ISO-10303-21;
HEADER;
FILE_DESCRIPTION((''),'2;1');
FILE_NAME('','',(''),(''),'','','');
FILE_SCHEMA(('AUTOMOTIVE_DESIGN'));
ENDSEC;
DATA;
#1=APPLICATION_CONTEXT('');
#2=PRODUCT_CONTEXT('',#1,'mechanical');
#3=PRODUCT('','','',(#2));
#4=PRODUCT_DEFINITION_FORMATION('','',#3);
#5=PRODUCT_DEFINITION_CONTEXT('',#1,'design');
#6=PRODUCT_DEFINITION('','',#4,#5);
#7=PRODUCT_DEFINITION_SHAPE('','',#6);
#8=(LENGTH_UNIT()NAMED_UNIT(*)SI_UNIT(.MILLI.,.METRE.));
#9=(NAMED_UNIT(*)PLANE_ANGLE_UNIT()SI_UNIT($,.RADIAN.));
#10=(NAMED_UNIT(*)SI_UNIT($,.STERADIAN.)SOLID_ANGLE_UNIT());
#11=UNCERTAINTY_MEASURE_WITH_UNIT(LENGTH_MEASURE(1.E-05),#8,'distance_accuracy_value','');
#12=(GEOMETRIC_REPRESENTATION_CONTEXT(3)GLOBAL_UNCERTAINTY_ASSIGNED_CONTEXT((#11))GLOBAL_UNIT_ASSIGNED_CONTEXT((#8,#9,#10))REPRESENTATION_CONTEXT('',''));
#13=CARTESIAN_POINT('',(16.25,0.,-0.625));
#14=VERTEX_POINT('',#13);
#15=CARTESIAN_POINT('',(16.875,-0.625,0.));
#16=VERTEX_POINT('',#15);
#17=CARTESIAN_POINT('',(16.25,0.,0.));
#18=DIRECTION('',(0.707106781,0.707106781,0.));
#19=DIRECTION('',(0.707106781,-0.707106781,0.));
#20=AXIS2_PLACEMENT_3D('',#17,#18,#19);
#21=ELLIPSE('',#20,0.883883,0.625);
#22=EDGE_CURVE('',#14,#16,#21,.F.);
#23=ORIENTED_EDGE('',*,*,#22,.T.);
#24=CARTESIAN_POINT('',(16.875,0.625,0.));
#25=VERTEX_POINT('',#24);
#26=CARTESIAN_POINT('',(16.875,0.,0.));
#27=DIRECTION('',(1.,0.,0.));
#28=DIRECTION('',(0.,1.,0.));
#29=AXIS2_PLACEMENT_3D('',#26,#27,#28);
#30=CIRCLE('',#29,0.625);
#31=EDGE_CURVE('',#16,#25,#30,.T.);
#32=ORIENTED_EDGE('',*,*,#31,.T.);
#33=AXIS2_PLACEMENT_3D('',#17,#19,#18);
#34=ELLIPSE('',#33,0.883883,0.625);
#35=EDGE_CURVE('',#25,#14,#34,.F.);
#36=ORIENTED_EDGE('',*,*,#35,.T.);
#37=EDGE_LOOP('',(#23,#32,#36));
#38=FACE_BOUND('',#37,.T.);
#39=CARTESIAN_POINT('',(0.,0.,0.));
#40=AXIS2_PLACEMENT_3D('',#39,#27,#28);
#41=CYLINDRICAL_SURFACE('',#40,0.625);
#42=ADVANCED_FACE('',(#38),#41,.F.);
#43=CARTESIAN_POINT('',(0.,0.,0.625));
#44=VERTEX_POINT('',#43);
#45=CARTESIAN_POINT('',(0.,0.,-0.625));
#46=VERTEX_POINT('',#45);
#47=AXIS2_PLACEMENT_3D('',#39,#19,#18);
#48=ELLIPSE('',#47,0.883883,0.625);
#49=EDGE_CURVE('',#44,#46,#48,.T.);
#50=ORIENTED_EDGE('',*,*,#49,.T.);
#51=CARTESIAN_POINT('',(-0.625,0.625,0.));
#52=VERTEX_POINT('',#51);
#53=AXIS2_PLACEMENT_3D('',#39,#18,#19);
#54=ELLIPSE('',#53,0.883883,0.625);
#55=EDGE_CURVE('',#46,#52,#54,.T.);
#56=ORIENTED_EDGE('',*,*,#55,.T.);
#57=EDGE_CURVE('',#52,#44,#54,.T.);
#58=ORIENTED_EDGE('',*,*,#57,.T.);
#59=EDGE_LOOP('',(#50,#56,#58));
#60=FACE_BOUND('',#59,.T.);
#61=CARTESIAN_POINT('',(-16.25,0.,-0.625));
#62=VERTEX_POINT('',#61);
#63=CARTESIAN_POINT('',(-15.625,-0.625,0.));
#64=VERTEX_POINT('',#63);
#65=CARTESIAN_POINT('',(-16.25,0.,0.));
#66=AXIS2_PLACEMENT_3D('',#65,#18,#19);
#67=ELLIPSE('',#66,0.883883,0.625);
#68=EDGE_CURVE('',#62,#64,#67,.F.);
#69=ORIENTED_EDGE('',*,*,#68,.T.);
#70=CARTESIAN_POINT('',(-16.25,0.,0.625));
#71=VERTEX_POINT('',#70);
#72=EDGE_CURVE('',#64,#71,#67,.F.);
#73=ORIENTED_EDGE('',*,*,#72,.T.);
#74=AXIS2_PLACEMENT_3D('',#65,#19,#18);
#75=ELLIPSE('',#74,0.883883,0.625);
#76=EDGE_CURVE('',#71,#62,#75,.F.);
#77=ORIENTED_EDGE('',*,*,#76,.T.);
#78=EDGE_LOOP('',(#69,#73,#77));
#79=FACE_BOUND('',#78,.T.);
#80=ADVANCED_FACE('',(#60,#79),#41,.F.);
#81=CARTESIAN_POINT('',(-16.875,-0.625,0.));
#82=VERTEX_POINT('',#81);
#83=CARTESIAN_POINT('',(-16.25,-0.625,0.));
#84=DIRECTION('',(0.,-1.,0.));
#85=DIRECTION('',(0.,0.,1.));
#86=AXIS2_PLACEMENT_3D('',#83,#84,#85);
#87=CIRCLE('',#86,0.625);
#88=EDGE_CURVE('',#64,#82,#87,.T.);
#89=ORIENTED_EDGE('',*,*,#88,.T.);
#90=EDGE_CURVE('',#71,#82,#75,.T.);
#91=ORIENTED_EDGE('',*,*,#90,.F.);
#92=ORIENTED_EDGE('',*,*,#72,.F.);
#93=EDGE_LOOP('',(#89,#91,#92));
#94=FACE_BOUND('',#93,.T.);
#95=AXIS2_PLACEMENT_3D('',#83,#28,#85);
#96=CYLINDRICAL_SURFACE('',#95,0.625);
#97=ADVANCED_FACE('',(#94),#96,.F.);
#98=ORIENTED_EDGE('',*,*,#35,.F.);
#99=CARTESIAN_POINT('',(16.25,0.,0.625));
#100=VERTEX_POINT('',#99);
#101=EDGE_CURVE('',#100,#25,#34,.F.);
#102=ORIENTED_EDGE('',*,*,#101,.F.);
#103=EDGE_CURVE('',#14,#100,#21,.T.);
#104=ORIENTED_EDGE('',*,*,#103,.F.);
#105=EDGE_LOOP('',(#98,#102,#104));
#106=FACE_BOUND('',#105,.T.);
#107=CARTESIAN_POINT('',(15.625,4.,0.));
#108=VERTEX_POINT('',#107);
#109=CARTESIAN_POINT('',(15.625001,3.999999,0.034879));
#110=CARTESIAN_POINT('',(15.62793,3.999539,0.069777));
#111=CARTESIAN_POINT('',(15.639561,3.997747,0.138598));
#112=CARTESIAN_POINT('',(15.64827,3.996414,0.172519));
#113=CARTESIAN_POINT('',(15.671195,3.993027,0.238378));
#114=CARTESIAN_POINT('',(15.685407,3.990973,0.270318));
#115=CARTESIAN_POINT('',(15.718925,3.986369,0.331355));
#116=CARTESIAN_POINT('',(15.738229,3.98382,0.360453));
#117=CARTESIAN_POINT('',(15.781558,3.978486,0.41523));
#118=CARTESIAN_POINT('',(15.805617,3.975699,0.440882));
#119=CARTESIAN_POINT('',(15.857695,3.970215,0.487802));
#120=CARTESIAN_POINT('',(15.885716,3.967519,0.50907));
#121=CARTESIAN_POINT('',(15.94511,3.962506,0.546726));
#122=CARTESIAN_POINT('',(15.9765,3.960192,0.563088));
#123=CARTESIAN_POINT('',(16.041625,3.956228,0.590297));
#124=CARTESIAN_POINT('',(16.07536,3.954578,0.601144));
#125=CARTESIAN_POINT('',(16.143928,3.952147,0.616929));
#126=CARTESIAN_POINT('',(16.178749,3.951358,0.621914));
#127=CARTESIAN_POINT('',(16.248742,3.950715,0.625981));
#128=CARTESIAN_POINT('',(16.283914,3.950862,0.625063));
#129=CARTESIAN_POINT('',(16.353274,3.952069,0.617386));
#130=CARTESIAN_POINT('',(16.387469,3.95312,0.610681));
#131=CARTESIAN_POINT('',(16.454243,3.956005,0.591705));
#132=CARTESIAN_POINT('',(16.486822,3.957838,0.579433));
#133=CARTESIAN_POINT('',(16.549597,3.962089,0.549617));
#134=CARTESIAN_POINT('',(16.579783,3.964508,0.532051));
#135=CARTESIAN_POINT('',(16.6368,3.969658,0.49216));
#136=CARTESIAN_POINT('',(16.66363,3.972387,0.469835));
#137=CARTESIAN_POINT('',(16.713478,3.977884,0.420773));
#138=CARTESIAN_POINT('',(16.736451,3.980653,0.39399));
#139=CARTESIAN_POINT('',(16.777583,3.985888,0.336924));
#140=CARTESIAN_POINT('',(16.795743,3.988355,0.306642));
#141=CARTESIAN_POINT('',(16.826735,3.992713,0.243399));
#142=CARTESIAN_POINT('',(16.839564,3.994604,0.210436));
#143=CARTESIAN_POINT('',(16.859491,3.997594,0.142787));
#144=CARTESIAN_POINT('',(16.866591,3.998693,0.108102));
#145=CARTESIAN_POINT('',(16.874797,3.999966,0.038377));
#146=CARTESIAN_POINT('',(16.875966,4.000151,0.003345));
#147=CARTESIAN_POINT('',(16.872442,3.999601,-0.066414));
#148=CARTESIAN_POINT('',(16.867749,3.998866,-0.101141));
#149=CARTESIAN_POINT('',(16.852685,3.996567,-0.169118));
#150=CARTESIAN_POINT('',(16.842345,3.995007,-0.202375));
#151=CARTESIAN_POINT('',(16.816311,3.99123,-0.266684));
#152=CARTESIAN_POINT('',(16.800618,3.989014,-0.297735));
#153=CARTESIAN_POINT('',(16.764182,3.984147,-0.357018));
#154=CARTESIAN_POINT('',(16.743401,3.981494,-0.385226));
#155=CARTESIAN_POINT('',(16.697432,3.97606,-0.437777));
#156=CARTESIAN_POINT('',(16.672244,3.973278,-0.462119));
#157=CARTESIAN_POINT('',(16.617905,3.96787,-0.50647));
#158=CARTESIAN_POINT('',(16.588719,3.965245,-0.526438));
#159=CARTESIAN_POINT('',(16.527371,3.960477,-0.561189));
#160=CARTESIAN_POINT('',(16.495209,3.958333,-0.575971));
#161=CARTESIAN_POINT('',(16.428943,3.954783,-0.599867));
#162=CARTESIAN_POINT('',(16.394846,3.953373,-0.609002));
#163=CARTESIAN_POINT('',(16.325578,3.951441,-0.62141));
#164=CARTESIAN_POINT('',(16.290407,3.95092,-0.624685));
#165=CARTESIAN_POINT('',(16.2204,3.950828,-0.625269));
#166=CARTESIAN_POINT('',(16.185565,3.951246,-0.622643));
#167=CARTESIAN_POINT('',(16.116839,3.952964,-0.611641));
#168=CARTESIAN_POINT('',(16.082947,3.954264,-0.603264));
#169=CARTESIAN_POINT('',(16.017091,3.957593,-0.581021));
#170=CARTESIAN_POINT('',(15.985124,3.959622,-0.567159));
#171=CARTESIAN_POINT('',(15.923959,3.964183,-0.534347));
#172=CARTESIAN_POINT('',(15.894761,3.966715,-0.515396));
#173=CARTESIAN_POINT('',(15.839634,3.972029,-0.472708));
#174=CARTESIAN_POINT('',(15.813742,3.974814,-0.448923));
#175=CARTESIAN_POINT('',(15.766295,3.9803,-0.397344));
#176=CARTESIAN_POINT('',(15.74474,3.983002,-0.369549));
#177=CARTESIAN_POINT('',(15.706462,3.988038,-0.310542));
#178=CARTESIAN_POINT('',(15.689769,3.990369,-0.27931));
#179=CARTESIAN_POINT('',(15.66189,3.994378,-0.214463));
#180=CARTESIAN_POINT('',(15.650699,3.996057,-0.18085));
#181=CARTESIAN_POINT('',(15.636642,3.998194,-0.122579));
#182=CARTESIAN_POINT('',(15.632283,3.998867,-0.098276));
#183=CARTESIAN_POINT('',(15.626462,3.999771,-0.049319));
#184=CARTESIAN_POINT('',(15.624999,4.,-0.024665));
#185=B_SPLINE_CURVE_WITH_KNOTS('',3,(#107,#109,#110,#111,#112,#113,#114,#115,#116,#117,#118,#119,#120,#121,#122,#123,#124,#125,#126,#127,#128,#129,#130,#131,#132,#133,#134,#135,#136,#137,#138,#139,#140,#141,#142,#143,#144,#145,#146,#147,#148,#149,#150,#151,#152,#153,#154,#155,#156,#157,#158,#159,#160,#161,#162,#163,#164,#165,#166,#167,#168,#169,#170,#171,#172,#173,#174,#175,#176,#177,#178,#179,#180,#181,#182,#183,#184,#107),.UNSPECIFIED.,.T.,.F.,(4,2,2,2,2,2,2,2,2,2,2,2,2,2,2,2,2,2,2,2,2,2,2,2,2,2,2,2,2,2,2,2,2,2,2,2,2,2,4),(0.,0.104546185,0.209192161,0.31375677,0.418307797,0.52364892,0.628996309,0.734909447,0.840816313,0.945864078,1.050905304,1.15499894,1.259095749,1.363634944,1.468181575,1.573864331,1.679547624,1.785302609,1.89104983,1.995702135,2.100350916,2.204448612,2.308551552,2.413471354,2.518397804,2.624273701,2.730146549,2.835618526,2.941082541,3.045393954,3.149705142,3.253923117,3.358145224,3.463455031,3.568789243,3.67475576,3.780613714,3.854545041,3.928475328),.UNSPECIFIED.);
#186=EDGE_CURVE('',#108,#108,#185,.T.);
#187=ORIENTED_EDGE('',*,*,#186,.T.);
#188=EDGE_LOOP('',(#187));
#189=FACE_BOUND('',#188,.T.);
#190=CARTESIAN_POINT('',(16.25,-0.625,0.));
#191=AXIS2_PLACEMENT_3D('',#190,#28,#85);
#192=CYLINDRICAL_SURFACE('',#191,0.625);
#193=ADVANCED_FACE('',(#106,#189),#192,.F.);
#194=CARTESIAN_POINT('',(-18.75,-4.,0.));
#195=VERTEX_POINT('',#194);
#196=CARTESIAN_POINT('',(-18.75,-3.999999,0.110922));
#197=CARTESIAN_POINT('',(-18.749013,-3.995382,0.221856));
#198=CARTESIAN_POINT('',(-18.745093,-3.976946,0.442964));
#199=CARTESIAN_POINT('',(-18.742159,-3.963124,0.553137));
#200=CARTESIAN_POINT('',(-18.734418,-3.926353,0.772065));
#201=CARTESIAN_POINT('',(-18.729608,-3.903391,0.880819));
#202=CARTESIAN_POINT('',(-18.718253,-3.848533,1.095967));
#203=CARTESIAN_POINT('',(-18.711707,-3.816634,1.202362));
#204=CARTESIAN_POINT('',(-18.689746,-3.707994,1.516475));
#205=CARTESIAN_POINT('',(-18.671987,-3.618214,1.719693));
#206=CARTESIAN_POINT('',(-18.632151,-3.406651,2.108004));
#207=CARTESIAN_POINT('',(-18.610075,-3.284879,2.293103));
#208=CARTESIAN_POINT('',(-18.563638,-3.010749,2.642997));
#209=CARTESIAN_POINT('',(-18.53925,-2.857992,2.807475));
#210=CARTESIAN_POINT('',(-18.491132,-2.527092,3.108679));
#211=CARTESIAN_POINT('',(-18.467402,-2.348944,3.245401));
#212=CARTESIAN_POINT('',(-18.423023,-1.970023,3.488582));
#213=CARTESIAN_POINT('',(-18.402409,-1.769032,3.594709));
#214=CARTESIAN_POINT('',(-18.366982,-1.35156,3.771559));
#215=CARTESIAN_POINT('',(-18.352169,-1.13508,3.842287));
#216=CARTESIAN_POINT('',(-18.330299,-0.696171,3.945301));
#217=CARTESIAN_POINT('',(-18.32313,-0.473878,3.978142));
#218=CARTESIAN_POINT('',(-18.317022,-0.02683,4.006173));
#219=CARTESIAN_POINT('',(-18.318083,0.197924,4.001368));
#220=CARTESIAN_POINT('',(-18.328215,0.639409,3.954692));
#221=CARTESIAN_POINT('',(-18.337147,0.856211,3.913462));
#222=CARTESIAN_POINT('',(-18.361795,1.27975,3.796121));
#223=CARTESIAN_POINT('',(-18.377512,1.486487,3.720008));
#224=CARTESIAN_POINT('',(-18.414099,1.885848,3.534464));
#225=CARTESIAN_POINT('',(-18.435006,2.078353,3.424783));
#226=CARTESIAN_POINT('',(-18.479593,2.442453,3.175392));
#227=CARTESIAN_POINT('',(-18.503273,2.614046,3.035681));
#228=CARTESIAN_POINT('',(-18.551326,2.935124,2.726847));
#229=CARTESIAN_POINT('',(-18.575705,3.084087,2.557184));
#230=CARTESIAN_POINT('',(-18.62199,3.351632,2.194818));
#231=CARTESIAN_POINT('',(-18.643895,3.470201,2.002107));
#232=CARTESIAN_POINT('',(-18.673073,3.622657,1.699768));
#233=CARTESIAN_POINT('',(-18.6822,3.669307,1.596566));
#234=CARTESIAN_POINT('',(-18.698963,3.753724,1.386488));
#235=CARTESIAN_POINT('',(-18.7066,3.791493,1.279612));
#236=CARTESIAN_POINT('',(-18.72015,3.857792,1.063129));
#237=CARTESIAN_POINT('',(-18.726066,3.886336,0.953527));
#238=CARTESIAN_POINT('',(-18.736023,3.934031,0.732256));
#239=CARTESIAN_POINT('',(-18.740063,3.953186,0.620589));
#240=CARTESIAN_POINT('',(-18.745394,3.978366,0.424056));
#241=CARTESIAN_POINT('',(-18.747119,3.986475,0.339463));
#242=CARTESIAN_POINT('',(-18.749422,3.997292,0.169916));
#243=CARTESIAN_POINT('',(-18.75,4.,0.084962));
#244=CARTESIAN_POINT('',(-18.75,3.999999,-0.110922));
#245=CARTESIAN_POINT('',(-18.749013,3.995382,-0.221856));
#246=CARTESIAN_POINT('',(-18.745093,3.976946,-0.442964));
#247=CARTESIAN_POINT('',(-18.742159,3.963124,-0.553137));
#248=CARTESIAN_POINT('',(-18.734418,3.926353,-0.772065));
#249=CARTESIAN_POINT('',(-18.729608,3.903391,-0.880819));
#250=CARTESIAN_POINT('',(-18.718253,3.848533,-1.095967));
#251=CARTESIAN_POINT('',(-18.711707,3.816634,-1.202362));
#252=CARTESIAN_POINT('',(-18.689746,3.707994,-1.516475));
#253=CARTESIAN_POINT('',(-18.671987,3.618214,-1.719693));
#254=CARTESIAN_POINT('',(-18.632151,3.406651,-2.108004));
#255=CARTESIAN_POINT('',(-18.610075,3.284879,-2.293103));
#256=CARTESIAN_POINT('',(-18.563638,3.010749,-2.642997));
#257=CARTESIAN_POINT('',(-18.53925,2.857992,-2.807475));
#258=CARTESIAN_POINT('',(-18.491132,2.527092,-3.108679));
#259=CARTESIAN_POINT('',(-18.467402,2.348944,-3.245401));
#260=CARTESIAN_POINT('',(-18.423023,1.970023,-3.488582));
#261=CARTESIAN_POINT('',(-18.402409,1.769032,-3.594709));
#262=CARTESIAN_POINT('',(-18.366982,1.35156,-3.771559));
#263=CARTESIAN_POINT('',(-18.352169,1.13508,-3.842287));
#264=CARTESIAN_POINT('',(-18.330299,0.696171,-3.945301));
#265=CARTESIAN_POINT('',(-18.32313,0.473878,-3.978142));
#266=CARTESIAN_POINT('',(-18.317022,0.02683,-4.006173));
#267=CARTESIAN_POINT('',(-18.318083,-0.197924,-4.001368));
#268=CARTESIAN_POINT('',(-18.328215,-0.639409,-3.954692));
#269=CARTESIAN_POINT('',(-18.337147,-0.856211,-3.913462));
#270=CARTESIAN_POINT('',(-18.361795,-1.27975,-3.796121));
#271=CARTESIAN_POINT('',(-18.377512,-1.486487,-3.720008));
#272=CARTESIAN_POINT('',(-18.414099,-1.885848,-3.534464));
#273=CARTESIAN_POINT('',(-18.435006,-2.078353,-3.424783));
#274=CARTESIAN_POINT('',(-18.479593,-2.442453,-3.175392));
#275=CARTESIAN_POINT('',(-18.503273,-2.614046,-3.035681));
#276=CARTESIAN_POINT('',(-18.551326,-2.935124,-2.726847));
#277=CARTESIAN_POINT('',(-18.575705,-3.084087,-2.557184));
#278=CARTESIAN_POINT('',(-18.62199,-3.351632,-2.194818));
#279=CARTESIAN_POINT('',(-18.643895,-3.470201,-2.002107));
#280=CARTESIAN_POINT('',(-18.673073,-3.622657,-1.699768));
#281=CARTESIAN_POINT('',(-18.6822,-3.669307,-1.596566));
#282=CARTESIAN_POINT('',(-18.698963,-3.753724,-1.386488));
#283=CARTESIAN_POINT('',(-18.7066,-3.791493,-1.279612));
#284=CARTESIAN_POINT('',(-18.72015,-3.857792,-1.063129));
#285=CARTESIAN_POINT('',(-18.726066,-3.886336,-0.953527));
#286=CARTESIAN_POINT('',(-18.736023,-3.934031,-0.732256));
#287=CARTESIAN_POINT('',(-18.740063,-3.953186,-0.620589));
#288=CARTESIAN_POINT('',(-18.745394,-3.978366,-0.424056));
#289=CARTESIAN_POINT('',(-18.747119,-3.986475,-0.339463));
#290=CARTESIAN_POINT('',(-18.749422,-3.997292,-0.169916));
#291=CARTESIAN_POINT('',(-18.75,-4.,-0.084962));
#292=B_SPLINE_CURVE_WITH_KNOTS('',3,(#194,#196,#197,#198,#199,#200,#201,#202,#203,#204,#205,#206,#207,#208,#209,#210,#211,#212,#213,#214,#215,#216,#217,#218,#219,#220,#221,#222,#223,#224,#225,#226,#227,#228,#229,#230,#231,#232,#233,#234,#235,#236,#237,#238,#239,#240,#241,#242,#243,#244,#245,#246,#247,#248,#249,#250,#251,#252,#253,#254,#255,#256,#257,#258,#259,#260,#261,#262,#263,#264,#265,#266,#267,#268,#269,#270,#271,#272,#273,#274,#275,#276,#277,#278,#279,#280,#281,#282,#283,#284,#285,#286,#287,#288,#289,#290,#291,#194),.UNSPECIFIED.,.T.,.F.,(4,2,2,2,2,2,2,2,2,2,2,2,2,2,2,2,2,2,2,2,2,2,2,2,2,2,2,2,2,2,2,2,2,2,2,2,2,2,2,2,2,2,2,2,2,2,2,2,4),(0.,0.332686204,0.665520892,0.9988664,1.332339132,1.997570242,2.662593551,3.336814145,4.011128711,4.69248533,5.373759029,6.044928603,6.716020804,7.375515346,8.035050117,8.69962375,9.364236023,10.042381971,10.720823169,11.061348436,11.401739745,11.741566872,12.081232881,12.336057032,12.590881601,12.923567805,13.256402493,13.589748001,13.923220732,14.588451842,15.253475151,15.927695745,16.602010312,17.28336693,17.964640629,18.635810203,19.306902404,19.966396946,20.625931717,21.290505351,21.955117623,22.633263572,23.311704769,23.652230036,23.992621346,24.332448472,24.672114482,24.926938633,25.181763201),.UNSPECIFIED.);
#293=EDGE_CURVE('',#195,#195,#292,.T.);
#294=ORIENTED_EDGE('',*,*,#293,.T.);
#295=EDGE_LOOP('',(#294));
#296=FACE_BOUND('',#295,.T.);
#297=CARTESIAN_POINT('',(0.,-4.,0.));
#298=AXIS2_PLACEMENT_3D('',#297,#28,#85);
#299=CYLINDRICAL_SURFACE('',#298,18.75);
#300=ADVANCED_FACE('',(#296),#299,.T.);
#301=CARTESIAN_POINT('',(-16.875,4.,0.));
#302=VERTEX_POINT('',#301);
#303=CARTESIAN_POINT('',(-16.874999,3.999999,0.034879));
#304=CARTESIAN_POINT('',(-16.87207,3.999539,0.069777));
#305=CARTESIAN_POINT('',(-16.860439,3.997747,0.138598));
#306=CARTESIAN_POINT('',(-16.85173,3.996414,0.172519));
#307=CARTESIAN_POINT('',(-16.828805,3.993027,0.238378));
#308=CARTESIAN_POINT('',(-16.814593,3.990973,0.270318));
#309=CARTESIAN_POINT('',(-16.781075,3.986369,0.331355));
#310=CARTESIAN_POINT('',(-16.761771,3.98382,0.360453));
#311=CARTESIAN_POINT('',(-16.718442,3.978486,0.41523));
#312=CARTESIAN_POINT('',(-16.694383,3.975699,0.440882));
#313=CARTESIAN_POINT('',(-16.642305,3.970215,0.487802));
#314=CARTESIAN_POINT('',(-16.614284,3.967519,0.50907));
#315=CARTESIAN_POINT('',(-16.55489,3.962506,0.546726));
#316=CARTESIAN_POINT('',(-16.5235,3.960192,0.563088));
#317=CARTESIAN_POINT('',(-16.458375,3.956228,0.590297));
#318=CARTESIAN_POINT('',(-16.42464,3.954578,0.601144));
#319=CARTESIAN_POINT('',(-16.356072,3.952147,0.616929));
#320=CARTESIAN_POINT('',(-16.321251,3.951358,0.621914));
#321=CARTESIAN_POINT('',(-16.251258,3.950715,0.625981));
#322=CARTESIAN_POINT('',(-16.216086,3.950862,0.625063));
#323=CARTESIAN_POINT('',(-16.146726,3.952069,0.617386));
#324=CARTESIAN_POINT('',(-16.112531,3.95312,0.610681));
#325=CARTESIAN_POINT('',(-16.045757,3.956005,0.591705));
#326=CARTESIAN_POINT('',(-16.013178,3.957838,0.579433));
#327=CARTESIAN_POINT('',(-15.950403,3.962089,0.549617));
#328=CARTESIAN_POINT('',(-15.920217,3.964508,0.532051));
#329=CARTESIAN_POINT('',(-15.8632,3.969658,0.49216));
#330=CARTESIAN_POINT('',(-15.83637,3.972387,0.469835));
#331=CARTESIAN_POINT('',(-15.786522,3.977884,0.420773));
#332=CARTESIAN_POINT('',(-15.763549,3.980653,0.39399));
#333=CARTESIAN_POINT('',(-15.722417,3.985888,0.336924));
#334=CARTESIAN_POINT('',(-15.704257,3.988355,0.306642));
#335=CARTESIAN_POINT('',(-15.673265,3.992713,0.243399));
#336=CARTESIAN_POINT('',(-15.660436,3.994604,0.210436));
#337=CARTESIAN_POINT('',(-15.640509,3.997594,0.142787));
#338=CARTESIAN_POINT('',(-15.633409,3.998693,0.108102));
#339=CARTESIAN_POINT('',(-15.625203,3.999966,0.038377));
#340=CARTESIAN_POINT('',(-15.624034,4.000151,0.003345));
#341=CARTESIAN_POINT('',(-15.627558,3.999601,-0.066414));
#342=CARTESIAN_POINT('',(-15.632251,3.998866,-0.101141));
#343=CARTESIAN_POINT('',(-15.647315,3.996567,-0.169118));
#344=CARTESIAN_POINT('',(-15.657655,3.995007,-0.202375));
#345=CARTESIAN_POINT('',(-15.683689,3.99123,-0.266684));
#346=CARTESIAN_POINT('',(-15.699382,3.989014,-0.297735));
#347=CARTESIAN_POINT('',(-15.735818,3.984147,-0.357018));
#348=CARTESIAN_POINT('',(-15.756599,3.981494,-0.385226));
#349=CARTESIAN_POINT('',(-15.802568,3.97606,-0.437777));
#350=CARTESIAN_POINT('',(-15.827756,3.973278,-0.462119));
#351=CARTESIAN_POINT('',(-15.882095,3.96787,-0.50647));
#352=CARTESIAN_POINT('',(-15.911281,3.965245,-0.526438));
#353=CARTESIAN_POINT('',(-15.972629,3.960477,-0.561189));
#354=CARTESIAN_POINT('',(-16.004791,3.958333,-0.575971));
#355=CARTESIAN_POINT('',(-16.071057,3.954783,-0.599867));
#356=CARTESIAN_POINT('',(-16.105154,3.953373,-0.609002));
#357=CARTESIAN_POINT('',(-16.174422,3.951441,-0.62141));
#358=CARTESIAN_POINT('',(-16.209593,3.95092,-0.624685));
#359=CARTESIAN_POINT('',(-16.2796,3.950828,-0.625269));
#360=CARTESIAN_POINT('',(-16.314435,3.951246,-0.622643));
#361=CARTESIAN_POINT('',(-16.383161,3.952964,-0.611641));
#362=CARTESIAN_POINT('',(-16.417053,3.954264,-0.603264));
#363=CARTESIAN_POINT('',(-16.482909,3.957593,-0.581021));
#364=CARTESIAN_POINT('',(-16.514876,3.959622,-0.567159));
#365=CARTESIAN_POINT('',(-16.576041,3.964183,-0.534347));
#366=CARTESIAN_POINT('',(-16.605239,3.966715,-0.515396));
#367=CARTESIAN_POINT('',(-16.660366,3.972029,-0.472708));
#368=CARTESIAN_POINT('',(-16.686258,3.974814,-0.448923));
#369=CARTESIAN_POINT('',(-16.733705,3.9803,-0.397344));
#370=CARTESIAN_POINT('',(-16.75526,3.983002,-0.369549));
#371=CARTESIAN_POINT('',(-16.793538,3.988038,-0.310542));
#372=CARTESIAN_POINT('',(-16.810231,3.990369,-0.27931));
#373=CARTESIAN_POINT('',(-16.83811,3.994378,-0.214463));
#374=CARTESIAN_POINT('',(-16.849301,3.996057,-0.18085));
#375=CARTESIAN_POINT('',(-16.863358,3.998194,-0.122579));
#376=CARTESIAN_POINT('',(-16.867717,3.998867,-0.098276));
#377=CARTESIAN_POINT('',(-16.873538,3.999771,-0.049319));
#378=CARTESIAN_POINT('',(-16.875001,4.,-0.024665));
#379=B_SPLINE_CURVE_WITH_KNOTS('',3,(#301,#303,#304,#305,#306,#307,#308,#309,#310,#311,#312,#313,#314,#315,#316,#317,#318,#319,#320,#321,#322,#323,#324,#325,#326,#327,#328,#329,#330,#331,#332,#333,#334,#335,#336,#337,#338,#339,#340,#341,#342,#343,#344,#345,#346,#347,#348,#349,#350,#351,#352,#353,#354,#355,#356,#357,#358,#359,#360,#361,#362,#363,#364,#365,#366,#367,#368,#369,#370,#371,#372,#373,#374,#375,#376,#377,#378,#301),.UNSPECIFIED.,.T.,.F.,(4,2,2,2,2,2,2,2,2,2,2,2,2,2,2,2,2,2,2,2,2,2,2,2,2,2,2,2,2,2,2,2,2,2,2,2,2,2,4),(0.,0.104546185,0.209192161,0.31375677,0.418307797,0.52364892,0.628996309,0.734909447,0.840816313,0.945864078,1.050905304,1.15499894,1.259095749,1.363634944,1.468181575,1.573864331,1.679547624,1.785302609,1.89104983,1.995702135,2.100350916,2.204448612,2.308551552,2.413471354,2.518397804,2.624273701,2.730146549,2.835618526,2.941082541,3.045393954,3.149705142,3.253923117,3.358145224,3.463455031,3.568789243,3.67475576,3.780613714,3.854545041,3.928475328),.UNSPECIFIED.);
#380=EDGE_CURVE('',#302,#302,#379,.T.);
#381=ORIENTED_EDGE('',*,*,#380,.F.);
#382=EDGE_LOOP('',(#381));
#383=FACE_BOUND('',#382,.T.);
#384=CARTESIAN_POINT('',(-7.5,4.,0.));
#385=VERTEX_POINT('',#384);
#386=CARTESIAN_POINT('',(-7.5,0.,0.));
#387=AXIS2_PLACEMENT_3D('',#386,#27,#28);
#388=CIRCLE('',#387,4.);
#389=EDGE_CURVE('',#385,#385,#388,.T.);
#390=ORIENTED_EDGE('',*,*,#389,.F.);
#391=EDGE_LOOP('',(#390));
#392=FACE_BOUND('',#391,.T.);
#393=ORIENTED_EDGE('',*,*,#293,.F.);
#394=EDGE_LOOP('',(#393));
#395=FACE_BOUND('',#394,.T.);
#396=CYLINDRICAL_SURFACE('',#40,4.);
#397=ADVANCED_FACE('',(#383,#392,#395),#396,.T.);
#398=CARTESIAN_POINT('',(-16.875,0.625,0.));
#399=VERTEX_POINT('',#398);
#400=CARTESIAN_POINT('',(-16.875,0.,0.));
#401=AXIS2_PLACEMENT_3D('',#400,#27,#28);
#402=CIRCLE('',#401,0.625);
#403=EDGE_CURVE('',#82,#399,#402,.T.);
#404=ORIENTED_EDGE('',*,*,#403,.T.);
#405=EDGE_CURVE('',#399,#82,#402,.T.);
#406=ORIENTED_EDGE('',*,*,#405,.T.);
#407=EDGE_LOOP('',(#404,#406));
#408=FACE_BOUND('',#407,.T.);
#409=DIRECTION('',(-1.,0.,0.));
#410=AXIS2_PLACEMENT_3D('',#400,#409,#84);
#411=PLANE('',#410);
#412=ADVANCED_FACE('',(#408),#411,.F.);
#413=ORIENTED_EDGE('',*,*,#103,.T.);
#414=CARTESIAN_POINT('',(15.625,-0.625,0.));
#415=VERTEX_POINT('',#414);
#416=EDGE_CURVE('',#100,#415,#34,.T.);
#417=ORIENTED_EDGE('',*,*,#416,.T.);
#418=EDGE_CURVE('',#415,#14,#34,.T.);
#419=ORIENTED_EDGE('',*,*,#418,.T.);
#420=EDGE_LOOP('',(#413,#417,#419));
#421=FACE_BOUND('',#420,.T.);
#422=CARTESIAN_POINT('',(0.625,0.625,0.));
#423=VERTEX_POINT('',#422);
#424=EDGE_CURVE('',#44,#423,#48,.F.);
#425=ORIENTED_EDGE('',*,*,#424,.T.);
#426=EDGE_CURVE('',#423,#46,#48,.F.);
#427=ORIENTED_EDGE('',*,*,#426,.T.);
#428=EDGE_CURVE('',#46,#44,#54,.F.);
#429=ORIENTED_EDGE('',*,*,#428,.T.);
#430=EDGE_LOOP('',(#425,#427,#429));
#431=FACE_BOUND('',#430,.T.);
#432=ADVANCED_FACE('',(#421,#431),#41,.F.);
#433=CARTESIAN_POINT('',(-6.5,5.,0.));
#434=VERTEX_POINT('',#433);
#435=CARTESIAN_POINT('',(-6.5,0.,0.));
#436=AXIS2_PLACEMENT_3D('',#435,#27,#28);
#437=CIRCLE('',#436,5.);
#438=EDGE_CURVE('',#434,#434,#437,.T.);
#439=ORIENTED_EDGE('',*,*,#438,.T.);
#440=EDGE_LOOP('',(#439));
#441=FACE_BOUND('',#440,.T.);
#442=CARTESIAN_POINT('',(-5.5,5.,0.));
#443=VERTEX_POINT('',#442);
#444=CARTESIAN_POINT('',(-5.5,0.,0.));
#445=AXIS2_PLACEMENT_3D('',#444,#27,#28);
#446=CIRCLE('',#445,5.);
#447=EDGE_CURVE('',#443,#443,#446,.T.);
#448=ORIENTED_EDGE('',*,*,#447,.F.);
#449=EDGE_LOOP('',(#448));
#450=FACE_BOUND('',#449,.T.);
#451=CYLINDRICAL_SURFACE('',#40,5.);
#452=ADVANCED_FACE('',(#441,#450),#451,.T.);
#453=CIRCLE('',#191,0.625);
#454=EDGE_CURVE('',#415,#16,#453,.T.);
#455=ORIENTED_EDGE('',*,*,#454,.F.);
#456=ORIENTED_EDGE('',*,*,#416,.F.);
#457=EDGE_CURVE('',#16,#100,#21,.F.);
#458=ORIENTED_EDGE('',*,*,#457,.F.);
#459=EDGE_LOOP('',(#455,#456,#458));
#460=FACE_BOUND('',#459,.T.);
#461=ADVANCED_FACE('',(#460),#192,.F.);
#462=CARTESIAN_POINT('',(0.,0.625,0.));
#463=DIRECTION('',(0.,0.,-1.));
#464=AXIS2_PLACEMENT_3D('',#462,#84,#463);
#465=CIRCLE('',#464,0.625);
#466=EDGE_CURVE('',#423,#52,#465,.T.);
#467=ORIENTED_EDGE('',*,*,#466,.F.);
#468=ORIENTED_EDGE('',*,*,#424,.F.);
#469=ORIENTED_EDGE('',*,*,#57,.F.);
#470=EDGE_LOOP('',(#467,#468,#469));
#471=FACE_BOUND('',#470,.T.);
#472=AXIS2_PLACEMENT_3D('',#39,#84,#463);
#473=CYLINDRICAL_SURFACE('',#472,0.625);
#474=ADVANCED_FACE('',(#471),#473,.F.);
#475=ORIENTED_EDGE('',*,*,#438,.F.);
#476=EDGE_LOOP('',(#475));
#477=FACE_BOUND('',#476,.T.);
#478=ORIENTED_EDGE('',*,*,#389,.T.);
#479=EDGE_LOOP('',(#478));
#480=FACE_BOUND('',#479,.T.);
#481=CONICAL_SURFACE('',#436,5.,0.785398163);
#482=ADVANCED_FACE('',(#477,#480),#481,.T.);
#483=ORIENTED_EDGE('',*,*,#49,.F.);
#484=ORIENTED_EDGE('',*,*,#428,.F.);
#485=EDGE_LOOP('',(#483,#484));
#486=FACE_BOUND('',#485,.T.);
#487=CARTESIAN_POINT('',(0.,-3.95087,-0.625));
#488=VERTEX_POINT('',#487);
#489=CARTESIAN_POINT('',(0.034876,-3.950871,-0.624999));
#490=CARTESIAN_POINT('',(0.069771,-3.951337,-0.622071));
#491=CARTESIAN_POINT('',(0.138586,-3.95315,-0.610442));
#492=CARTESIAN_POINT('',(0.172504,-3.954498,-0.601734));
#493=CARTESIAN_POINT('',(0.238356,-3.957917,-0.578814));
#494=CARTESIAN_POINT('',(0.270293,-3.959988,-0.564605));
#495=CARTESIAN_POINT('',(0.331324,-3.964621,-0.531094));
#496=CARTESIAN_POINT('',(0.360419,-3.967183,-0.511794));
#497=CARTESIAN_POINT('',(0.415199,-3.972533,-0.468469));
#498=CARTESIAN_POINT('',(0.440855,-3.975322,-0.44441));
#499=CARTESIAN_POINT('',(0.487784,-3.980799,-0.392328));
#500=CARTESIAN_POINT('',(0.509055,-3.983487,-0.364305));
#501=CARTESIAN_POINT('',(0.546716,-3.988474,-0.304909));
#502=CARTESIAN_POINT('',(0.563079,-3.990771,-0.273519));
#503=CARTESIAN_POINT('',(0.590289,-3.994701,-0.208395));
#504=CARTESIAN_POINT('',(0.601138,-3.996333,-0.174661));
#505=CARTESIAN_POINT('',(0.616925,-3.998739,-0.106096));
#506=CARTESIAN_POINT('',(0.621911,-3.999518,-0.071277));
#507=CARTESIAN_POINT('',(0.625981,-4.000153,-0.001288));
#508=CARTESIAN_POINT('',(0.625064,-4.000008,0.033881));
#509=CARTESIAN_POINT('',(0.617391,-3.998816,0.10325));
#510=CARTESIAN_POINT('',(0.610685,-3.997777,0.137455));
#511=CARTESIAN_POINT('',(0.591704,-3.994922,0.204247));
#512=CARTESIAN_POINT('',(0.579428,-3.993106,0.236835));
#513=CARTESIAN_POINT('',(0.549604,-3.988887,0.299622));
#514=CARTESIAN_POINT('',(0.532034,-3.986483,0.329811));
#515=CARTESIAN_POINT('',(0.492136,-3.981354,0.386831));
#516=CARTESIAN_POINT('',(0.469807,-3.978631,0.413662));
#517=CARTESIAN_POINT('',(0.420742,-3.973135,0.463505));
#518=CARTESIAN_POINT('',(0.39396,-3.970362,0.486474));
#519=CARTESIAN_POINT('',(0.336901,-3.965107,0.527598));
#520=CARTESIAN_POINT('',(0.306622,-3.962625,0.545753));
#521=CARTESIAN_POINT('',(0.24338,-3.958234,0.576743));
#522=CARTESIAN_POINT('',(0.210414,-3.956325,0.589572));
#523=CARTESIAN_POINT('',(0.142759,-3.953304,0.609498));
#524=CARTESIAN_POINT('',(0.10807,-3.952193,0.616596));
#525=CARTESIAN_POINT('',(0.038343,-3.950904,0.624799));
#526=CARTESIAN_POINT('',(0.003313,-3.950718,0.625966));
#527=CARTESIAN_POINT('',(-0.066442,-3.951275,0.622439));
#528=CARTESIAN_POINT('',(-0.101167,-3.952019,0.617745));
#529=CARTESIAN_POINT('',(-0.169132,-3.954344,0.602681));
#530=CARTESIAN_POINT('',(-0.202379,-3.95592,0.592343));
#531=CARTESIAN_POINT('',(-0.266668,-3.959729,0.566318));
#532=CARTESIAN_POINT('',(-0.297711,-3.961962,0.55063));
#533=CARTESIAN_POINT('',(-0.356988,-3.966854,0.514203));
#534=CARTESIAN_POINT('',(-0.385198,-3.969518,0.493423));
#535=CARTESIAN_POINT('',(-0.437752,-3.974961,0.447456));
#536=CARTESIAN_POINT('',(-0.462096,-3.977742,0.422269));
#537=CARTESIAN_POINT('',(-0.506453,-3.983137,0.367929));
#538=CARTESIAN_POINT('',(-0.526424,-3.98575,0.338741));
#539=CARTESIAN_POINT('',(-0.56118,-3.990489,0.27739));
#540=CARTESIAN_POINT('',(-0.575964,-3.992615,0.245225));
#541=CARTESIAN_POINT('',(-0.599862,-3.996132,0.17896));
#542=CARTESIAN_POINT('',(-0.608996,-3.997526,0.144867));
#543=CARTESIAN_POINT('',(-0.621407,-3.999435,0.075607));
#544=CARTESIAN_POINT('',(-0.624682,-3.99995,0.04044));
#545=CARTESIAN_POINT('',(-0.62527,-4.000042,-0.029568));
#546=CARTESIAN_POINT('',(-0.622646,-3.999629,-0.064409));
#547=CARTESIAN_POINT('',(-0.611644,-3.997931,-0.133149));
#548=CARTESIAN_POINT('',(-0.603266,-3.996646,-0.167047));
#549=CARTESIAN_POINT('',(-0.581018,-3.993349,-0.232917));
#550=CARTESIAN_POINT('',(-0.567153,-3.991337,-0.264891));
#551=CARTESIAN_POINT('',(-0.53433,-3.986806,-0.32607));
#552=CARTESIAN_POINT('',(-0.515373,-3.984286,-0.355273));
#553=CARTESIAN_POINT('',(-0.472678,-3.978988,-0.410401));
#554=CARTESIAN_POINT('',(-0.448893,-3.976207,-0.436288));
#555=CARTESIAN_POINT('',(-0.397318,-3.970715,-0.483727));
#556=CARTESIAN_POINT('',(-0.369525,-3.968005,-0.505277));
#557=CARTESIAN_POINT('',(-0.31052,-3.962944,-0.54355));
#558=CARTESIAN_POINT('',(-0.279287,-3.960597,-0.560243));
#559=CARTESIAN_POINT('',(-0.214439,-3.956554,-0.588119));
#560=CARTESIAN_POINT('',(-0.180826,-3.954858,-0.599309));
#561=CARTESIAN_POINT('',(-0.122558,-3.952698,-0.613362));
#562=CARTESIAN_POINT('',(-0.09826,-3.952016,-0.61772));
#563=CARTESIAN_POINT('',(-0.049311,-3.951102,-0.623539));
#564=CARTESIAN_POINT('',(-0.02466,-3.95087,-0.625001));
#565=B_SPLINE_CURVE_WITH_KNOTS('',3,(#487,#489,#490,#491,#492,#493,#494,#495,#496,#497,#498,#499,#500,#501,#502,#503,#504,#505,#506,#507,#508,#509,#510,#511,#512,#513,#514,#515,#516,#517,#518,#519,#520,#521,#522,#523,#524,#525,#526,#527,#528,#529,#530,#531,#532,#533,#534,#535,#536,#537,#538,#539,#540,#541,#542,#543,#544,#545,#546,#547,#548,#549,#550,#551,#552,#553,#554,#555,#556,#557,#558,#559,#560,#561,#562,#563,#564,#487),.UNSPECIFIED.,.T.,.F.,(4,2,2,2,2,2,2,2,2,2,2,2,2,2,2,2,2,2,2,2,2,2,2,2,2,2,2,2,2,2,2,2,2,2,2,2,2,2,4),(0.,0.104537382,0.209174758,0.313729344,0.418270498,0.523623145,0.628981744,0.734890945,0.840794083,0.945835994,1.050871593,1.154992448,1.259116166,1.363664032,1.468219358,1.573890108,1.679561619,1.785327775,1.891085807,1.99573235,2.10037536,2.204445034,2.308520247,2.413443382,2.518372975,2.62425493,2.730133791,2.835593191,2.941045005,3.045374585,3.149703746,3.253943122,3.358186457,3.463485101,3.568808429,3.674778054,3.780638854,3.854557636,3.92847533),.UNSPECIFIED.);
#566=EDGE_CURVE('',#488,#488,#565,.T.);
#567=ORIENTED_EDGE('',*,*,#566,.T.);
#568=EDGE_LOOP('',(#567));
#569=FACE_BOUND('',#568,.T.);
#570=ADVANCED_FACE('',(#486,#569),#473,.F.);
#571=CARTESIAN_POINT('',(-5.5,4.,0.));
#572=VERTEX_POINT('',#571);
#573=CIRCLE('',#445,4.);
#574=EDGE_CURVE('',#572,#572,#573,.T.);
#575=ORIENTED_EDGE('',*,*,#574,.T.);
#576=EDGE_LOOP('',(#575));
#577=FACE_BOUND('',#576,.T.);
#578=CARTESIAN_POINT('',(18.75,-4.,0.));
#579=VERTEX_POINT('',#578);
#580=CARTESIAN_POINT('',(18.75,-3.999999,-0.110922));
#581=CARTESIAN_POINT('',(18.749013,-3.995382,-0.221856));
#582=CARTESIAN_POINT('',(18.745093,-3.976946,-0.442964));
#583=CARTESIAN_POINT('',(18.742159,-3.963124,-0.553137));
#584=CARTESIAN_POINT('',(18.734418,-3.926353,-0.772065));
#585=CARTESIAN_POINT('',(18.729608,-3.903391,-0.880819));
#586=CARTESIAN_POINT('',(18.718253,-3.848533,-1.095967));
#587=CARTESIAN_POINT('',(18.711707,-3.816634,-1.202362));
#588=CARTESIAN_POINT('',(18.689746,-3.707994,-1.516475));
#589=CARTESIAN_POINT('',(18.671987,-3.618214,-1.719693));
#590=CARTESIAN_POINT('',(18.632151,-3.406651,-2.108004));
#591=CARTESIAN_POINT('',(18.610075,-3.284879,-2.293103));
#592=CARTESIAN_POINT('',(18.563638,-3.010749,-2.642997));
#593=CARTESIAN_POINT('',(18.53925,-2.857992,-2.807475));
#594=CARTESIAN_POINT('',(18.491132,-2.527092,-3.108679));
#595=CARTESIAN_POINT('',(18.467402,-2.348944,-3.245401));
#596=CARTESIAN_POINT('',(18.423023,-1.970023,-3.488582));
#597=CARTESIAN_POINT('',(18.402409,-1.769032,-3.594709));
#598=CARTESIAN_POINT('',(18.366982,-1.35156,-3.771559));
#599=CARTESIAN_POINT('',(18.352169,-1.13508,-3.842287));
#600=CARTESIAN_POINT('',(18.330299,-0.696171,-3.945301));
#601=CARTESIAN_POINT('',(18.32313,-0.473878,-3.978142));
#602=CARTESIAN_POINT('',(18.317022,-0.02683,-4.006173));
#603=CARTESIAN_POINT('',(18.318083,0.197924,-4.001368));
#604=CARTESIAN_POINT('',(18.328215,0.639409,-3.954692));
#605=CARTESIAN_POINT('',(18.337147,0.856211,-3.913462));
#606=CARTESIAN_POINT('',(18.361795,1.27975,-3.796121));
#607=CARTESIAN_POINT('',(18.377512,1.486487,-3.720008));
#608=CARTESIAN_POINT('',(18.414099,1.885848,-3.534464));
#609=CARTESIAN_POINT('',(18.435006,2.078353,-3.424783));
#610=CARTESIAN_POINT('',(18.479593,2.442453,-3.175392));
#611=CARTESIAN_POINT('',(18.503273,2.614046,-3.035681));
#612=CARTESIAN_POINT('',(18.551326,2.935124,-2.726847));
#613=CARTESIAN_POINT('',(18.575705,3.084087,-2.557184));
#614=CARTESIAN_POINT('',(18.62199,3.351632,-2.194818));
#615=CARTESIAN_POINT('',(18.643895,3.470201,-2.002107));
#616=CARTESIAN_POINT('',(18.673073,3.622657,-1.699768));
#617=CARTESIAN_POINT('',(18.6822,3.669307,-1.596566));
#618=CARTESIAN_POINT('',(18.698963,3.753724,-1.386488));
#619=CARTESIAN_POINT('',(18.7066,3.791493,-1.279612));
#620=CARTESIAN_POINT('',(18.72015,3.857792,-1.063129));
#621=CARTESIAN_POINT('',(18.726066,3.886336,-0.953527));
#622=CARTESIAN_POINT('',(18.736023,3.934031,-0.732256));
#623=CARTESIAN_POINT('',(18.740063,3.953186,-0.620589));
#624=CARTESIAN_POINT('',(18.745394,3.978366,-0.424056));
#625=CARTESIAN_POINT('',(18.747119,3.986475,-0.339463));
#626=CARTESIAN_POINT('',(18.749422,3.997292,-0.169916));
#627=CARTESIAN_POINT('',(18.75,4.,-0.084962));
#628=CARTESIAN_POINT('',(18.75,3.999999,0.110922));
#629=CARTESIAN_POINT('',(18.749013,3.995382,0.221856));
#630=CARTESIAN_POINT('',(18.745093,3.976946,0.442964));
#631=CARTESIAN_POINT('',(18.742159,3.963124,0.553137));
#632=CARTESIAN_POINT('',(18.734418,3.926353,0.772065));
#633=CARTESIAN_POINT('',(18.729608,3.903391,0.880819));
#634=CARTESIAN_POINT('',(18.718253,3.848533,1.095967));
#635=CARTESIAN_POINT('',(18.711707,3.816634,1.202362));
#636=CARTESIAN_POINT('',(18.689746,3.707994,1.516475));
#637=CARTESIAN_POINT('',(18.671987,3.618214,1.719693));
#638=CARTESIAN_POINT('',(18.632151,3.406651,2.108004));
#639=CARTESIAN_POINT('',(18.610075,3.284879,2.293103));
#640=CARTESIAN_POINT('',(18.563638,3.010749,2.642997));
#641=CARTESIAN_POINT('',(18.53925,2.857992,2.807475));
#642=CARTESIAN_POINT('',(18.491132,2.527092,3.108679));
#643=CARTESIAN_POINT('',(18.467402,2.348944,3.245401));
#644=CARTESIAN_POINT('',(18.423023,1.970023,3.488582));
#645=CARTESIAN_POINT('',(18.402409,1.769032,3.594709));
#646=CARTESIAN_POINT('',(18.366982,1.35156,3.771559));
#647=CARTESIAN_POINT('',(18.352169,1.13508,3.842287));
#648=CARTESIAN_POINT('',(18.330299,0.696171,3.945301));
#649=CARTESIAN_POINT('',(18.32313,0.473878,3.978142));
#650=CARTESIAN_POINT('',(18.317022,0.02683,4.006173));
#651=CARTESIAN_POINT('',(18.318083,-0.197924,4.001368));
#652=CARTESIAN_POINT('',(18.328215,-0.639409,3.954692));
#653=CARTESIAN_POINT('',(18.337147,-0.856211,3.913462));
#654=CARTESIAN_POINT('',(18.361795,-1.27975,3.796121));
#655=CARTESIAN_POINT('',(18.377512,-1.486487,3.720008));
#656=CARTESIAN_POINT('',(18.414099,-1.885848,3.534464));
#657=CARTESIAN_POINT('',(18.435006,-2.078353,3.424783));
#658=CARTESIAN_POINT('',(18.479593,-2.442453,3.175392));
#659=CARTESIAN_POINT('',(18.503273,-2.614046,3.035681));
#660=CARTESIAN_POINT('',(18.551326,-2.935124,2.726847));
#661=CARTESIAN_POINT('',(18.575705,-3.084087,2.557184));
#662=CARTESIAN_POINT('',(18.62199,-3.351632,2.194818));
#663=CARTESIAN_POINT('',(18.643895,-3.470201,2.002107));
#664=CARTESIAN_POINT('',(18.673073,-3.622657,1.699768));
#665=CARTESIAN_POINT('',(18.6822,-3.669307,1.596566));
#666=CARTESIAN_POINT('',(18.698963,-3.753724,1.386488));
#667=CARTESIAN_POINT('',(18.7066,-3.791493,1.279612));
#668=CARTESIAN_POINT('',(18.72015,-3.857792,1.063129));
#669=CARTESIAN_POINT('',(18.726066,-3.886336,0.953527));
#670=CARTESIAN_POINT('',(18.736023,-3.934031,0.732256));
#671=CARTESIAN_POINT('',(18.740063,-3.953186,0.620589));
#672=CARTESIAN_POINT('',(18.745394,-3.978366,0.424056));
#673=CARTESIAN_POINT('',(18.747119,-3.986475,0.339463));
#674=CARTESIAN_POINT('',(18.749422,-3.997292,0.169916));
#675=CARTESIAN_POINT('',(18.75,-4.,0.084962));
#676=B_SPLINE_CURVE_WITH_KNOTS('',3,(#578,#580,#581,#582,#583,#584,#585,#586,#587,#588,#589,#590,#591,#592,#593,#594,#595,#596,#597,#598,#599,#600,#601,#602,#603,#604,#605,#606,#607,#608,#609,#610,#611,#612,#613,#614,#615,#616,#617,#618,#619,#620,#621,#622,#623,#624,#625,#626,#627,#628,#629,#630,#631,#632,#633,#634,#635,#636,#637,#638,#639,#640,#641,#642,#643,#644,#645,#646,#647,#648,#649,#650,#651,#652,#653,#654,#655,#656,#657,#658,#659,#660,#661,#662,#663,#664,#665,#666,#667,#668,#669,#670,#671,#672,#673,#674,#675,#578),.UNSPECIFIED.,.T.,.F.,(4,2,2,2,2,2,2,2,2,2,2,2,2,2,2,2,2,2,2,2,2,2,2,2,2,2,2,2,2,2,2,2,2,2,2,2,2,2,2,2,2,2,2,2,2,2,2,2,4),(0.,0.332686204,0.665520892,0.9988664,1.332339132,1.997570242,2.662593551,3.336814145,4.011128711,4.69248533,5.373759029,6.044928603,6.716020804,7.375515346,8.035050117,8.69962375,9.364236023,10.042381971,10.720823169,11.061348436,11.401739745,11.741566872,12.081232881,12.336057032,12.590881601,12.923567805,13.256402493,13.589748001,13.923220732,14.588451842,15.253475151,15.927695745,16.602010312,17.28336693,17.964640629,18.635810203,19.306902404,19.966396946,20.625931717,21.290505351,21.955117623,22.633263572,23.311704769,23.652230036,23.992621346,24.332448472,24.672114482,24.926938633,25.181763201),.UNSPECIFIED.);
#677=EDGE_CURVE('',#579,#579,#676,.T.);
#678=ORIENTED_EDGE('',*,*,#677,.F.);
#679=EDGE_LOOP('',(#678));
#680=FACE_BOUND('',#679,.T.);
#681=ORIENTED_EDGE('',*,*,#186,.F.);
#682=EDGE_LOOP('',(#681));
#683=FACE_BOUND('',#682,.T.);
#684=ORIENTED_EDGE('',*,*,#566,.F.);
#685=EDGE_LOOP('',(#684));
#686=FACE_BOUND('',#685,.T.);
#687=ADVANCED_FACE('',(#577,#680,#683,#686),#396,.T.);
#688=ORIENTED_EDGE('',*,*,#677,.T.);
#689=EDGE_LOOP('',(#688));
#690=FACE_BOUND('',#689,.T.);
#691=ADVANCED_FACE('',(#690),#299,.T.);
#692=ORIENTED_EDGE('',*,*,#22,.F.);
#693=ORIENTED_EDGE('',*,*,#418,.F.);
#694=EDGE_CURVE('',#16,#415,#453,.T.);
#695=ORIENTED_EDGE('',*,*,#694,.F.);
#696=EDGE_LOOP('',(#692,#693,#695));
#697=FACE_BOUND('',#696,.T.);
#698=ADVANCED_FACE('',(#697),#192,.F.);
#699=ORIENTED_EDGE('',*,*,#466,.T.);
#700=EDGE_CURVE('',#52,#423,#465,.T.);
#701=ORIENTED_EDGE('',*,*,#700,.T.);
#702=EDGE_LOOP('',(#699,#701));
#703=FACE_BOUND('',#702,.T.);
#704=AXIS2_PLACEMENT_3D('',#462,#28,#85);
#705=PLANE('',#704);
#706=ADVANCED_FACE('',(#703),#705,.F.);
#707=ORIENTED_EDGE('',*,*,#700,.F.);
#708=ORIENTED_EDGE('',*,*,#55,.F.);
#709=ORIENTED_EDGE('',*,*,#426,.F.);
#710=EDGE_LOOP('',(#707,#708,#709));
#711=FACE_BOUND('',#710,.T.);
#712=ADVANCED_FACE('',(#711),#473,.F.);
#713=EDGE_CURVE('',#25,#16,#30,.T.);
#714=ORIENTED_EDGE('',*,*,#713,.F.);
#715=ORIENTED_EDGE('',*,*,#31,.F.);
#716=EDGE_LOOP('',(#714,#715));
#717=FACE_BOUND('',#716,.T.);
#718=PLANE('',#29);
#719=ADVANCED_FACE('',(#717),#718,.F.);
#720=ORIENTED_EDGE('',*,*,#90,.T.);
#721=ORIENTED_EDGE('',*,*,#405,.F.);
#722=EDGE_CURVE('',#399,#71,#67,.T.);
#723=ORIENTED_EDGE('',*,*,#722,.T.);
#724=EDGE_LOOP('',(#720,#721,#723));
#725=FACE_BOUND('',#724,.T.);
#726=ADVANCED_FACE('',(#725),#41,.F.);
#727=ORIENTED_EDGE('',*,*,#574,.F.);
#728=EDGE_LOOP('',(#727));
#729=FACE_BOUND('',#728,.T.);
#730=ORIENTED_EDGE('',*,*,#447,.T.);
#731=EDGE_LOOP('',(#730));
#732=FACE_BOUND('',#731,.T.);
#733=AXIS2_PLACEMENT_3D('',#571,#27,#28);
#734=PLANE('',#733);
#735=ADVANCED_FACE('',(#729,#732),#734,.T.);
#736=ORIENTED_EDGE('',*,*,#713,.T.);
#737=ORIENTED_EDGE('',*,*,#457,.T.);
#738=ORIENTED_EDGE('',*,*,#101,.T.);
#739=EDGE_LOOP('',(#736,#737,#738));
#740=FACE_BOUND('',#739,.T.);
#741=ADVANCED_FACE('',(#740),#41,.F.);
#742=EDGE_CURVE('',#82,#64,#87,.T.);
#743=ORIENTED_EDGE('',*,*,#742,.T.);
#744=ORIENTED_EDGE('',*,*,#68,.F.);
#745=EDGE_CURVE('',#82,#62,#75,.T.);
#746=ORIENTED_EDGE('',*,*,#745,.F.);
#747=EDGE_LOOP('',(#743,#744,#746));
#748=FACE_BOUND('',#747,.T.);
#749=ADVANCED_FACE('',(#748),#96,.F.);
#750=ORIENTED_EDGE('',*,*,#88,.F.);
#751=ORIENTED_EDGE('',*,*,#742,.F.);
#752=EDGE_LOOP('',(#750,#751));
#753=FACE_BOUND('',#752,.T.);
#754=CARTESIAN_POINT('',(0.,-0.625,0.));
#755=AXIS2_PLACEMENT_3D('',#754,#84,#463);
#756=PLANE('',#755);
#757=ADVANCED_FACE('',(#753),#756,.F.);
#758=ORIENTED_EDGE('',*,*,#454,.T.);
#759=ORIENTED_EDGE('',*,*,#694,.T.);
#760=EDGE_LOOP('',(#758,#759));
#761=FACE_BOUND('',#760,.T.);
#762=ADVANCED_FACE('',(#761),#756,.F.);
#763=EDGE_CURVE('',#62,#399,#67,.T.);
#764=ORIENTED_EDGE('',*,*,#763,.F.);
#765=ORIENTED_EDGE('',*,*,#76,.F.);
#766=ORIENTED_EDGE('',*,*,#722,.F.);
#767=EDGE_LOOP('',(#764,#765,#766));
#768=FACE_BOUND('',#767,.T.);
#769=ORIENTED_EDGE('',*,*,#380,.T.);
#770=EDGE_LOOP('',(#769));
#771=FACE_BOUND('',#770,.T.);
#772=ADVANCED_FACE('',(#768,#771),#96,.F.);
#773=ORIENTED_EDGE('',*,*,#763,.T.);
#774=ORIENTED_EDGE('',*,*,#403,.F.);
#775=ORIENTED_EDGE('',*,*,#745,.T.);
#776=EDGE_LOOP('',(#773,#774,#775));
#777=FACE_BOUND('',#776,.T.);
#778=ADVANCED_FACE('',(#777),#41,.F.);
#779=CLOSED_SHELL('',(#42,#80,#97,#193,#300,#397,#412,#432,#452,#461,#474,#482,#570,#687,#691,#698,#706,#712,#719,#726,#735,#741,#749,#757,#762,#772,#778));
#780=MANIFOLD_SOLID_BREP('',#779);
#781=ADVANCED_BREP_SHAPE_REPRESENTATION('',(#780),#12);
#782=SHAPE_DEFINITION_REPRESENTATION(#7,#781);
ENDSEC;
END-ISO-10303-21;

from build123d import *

# Parameters (mm, degrees)
SKETCH1_3_W             = 0.625
SKETCH1_3_H             = 4.625
SKETCH1_4_W             = 0.625
SKETCH1_4_H             = 4.625
CUT_EXTRUDE1_DEPTH      = 20.584751858
CUT_EXTRUDE1_DEPTH_BACK = 20.584751858


with BuildPart() as part:
    # Sketch1 → Revolve1 (revolve)
    with BuildSketch(Plane.XY):
        Polygon((-18.75, 4), (-18.75, 0), (-16.875, 0), (-16.875, 0.625), (16.875, 0.625), (16.875, 0), (18.75, 0), (18.75, 4), align=None)
    revolve(axis=Axis((0, 0, 0), (-1, 0, 0)))

    # Sketch1<3> → Cut-Revolve1 (revolve, cut)
    with BuildSketch(Plane.XY):
        with Locations((-0.3125, -1.6875)):
            Rectangle(SKETCH1_3_W, SKETCH1_3_H)
    revolve(axis=Axis((0, 0, 0), (0, 1, 0)), mode=Mode.SUBTRACT)

    # Sketch1<4> → Cut-Revolve2 (revolve, cut)
    with BuildSketch(Plane.XY):
        with Locations((16.5625, 1.6875)):
            Rectangle(SKETCH1_4_W, SKETCH1_4_H)
    cut_revolve2 = revolve(axis=Axis((16.25, -0.625, 0), (0, -1, 0)), mode=Mode.SUBTRACT)

    # Mirror1: Cut-Revolve2 across plane
    add(cut_revolve2.mirror(Plane(origin=(0, 0, 0), x_dir=(0, 0, 1), z_dir=(1, 0, 0))), mode=Mode.SUBTRACT)

    # Sketch2 → Cut-Extrude1 (cut, two sides: drawn at the far end of the back side and taken through both)
    with BuildSketch(Plane(origin=(0, 0, 0), x_dir=(1, 0, 0), z_dir=(0, 1, 0)).offset(-CUT_EXTRUDE1_DEPTH_BACK)):
        with BuildLine():
            Line((-18.318365102, 4), (-18.75, 4))
            Line((-18.75, 4), (-18.75, 0))
            ThreePointArc((-18.75, 0), (-18.641778961, 2.011610591), (-18.318365102, 4))
        make_face()
        with BuildLine():
            ThreePointArc((-18.318365102, -4), (-18.641778961, -2.011610591), (-18.75, 0))
            Line((-18.75, 0), (-18.75, -4))
            Line((-18.75, -4), (-18.318365102, -4))
        make_face()
        with BuildLine():
            Line((18.318365102, -4), (18.75, -4))
            Line((18.75, -4), (18.75, 0))
            ThreePointArc((18.75, 0), (18.641778961, -2.011610591), (18.318365102, -4))
        make_face()
        with BuildLine():
            ThreePointArc((18.318365102, 4), (18.641778961, 2.011610591), (18.75, 0))
            Line((18.75, 0), (18.75, 4))
            Line((18.75, 4), (18.318365102, 4))
        make_face()
    extrude(amount=CUT_EXTRUDE1_DEPTH + CUT_EXTRUDE1_DEPTH_BACK, mode=Mode.SUBTRACT)

    # Sketch3 → Revolve2 (revolve)
    with BuildSketch(Plane.XY):
        Polygon((-5.5, 4), (-5.5, 5), (-6.5, 5), (-7.5, 4), align=None)
    revolve(axis=Axis((0, 0, 0), (-1, 0, 0)))


solid = part.part
